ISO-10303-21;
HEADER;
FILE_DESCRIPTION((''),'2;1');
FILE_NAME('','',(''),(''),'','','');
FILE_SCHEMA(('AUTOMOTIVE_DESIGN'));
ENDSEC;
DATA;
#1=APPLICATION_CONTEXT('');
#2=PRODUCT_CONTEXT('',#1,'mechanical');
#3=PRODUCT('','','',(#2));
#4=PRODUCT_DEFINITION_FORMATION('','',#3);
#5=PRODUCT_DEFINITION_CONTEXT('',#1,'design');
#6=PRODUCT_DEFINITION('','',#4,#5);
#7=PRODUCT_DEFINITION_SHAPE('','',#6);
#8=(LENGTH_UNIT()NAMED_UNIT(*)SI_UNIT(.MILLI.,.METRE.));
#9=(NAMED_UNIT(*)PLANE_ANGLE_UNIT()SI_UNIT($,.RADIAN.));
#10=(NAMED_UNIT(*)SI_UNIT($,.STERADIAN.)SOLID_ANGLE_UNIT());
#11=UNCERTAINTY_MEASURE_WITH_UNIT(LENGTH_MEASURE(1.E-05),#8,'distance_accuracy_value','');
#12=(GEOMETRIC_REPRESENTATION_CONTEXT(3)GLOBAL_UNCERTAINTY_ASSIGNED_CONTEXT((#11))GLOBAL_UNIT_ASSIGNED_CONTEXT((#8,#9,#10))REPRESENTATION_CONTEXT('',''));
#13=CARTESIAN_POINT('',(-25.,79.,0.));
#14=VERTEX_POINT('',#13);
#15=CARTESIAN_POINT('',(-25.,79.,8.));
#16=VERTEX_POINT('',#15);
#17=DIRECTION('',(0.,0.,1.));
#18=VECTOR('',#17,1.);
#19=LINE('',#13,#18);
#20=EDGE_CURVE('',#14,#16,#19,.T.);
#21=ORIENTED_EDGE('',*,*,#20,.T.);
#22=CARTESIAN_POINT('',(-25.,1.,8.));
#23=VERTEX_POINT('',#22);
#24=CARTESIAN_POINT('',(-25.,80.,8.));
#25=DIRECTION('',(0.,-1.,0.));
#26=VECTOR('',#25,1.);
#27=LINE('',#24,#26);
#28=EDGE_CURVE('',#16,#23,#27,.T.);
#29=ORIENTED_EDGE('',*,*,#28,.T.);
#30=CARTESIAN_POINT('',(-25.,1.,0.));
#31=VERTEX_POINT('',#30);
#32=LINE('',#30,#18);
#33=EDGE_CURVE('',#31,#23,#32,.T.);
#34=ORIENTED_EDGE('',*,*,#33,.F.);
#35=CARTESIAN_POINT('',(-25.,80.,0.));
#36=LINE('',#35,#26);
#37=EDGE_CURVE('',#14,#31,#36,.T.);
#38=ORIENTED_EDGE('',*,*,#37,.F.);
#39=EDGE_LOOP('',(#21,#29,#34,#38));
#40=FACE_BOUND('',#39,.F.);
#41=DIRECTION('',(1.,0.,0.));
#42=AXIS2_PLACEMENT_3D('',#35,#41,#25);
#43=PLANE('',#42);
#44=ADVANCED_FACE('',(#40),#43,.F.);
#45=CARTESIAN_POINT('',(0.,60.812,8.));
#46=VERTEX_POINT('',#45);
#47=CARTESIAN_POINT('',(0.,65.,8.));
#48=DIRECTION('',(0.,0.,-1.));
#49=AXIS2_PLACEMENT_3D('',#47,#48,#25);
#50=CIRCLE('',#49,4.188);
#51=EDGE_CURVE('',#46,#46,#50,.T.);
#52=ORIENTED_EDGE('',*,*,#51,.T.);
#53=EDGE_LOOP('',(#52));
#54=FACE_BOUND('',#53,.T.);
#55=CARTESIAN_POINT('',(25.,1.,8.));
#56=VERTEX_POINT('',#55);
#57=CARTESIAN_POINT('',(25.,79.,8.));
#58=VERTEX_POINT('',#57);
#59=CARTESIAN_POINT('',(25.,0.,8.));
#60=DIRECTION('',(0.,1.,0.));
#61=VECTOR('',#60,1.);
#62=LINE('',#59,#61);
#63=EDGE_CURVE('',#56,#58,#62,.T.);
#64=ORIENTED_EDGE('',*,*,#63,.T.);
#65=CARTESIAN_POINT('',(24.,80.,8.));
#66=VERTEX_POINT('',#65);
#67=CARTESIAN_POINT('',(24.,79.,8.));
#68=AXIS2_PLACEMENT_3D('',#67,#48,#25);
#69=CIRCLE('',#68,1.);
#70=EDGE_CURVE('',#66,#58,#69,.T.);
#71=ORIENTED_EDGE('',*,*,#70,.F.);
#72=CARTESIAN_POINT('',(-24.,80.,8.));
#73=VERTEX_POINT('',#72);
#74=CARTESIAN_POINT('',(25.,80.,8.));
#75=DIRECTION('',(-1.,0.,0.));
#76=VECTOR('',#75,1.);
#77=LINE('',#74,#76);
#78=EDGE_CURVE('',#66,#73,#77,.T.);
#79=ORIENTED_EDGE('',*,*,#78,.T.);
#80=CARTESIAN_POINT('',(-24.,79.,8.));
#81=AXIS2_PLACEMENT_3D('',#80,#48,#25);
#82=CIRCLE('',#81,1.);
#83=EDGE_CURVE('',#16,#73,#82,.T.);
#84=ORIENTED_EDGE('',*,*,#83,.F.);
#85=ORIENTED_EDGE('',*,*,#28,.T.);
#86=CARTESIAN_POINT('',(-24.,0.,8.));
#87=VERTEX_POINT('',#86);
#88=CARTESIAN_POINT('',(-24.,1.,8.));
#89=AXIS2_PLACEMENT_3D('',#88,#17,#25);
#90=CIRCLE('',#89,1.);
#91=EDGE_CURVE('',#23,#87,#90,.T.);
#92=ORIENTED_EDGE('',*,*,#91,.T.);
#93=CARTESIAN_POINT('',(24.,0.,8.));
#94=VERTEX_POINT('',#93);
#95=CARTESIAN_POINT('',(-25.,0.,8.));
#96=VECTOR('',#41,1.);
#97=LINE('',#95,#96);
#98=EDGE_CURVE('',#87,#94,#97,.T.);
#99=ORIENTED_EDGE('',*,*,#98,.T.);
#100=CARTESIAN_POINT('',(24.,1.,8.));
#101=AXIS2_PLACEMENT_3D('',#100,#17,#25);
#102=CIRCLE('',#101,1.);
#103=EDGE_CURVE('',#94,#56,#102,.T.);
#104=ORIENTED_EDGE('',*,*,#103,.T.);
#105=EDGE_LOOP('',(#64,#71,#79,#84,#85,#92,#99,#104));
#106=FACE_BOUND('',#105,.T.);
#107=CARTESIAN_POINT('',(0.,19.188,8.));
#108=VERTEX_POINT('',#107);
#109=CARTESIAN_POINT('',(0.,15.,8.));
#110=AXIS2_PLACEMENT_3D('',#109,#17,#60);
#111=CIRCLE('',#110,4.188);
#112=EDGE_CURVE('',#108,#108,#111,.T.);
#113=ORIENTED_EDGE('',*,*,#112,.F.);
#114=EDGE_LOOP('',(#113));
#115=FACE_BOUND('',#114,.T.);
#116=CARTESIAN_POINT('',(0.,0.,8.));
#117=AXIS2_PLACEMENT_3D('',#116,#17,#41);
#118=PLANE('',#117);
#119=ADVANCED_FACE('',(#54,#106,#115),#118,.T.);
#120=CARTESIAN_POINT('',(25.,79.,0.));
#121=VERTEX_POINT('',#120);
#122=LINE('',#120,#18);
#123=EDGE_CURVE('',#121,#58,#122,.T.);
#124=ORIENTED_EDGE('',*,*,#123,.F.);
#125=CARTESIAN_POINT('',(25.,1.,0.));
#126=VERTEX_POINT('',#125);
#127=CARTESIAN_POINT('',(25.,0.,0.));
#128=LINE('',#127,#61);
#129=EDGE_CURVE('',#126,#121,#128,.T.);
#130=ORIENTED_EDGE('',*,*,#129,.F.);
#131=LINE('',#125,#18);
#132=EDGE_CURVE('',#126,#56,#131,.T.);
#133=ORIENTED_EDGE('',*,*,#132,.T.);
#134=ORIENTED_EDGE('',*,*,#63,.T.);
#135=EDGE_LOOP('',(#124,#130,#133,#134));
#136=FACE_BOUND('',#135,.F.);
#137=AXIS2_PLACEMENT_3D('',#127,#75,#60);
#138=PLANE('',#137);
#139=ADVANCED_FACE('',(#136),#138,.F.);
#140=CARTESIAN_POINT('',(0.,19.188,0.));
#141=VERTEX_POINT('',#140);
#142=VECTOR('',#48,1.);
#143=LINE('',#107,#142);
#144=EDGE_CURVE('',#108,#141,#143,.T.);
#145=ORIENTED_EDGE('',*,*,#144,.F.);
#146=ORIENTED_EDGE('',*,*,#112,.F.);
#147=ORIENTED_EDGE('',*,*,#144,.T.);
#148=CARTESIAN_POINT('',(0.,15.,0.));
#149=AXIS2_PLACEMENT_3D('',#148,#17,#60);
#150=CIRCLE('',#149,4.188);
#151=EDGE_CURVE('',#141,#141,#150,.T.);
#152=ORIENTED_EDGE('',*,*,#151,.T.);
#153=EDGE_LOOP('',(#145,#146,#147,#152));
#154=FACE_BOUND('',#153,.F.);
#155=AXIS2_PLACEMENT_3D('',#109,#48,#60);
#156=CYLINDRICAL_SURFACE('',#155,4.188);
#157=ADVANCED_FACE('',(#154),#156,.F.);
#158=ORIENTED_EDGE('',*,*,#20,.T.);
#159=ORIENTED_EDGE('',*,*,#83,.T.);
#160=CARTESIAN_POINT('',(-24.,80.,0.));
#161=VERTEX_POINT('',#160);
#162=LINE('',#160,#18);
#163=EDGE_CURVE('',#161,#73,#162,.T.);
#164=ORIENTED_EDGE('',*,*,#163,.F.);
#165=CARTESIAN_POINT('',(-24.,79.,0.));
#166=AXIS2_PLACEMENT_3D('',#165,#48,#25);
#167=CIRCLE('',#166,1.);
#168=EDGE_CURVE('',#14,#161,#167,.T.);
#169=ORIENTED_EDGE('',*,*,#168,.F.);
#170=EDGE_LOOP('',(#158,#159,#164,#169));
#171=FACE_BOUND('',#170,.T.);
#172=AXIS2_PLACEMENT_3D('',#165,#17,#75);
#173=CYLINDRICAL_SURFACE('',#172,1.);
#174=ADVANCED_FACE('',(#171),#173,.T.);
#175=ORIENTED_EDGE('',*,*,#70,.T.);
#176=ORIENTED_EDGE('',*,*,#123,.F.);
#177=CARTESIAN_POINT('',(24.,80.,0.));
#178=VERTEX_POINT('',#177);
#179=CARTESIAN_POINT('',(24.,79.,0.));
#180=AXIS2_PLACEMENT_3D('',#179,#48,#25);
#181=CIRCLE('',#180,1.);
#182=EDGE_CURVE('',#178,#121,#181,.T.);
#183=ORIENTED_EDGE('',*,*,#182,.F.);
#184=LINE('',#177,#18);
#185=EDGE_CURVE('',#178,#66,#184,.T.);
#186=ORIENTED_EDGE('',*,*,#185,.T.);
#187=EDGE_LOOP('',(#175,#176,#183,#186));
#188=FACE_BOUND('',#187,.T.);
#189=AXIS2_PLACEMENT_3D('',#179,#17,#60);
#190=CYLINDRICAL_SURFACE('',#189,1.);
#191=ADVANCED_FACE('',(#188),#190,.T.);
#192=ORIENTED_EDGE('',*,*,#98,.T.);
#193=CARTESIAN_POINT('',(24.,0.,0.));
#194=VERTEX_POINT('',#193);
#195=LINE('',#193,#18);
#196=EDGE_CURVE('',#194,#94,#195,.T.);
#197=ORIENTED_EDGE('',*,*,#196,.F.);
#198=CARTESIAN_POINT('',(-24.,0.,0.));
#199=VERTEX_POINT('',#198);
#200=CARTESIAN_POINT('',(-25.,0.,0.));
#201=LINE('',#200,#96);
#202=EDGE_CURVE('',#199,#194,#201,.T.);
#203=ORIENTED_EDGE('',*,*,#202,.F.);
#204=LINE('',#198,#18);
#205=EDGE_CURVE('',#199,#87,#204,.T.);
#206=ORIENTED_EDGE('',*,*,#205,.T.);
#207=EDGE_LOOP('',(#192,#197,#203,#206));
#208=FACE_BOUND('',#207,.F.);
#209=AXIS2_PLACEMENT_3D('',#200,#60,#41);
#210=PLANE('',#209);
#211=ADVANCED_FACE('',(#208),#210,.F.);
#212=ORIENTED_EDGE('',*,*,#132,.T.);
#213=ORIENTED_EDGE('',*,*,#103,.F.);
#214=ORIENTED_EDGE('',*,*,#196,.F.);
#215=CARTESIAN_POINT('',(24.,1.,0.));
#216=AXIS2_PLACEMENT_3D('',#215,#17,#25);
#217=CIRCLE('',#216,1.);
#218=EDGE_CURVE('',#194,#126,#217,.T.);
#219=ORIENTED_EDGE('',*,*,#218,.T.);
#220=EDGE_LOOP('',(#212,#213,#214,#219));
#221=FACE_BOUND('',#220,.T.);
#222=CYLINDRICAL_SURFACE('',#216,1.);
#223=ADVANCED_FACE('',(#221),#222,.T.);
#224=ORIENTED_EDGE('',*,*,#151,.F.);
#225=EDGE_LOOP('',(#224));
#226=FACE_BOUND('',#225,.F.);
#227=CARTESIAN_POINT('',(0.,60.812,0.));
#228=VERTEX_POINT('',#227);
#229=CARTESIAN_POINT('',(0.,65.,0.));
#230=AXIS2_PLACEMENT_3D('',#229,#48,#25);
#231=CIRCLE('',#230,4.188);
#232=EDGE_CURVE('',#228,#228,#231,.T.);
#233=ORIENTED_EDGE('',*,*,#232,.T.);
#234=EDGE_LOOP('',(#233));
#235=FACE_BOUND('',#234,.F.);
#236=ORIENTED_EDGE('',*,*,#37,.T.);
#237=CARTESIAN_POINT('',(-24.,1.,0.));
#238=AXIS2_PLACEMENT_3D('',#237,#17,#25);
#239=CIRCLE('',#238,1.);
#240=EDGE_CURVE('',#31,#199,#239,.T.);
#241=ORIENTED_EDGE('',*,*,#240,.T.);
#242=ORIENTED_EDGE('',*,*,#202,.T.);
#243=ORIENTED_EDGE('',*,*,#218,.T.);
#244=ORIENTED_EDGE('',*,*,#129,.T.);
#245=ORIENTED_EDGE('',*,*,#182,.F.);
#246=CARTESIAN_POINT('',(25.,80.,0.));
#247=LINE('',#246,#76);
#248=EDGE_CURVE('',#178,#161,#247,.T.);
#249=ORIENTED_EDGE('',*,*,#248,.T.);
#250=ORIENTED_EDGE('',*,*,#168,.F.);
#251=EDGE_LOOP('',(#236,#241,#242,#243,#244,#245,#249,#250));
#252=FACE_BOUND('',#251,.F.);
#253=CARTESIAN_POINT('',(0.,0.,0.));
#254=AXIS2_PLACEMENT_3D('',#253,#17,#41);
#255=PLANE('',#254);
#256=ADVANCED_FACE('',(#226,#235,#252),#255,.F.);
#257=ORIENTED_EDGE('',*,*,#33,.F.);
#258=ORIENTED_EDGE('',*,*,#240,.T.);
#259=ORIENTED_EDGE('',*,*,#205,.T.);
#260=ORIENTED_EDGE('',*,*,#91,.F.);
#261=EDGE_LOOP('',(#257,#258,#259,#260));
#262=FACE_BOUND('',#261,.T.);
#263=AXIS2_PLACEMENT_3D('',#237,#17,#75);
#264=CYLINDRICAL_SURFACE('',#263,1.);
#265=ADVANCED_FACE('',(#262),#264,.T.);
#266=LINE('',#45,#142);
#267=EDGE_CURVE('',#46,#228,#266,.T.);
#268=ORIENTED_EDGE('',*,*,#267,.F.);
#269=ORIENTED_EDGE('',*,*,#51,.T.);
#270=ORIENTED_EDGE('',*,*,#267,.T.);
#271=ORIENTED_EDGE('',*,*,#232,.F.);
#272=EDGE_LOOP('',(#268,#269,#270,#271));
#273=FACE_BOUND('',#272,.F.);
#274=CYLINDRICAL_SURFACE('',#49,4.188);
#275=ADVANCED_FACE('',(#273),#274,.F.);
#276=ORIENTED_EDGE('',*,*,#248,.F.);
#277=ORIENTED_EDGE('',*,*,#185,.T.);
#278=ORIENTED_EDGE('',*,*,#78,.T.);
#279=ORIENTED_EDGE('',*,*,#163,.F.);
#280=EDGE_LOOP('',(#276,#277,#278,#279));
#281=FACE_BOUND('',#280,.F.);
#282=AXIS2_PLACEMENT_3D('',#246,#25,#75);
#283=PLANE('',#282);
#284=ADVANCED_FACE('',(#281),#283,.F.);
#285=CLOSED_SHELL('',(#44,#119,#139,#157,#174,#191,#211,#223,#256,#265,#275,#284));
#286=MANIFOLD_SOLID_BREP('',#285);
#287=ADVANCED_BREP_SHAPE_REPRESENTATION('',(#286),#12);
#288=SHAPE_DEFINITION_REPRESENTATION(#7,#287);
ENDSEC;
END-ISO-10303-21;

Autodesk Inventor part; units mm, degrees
ref_plane "YZ Plane" through (0, 0, 0) normal (1, 0, 0) x (0, 1, 0)
ref_plane "XZ Plane" through (0, 0, 0) normal (0, 1, 0) x (-1, 0, 0)
sketch "Sketch1" plane through (0, 0, 0) normal (0, 0, 1) x (1, 0, 0)
  line L0 (-25, 0) -> (25, 0)
  line L1 (25, 0) -> (25, 80)
  line L2 (25, 80) -> (-25, 80)
  line L3 (-25, 80) -> (-25, 0)
  point P0 (0, 0)
  point P1 (0, 0)
  dimension "d2" = 80
  dimension "d3" = 50
extrude "Plate1" add sketch "Sketch1" along normal blind 8
hole "Hole1" at (0, 65, 8) direction (0, 0, -1) diameter 8.376 depth 8 tip angle 118 thread size "M10x1.5" class "6H" standard "ISO Metric profile"
ref_plane "Work Plane1" through (0, 0, 8) normal (-1, 0, 0) x (0, 0, 1)
ref_plane "Work Plane2" through (-25, 40, 8) normal (0, -1, 0) x (1, 0, 0)
mirror "Mirror1" about plane through (-25, 40, 8) normal (0, -1, 0) of "Hole1"
fillet "Corner Round1" radius 1 4 edges at (-25, 0, 4) (25, 0, 4) (-25, 80, 4) (25, 80, 4)
equation "\"d12\" = Thickness"
equation "\"BendReliefWidth\" = Thickness"
equation "\"CornerReliefSize\" = 4 * Thickness"
equation "\"MinimumRemnant\" = 2 * Thickness"
equation "\"TransitionRadius\" = BendRadius"
equation "\"d4\" = BendRadius"
equation "\"JacobiRadiusSize\" = Thickness"
equation "\"GapSize\" = Thickness"
equation "\"Thickness\" = 8"
equation "\"BendRadius\" = 0.001"
properties part number "draadlat poot" material "Steel, Mild"
